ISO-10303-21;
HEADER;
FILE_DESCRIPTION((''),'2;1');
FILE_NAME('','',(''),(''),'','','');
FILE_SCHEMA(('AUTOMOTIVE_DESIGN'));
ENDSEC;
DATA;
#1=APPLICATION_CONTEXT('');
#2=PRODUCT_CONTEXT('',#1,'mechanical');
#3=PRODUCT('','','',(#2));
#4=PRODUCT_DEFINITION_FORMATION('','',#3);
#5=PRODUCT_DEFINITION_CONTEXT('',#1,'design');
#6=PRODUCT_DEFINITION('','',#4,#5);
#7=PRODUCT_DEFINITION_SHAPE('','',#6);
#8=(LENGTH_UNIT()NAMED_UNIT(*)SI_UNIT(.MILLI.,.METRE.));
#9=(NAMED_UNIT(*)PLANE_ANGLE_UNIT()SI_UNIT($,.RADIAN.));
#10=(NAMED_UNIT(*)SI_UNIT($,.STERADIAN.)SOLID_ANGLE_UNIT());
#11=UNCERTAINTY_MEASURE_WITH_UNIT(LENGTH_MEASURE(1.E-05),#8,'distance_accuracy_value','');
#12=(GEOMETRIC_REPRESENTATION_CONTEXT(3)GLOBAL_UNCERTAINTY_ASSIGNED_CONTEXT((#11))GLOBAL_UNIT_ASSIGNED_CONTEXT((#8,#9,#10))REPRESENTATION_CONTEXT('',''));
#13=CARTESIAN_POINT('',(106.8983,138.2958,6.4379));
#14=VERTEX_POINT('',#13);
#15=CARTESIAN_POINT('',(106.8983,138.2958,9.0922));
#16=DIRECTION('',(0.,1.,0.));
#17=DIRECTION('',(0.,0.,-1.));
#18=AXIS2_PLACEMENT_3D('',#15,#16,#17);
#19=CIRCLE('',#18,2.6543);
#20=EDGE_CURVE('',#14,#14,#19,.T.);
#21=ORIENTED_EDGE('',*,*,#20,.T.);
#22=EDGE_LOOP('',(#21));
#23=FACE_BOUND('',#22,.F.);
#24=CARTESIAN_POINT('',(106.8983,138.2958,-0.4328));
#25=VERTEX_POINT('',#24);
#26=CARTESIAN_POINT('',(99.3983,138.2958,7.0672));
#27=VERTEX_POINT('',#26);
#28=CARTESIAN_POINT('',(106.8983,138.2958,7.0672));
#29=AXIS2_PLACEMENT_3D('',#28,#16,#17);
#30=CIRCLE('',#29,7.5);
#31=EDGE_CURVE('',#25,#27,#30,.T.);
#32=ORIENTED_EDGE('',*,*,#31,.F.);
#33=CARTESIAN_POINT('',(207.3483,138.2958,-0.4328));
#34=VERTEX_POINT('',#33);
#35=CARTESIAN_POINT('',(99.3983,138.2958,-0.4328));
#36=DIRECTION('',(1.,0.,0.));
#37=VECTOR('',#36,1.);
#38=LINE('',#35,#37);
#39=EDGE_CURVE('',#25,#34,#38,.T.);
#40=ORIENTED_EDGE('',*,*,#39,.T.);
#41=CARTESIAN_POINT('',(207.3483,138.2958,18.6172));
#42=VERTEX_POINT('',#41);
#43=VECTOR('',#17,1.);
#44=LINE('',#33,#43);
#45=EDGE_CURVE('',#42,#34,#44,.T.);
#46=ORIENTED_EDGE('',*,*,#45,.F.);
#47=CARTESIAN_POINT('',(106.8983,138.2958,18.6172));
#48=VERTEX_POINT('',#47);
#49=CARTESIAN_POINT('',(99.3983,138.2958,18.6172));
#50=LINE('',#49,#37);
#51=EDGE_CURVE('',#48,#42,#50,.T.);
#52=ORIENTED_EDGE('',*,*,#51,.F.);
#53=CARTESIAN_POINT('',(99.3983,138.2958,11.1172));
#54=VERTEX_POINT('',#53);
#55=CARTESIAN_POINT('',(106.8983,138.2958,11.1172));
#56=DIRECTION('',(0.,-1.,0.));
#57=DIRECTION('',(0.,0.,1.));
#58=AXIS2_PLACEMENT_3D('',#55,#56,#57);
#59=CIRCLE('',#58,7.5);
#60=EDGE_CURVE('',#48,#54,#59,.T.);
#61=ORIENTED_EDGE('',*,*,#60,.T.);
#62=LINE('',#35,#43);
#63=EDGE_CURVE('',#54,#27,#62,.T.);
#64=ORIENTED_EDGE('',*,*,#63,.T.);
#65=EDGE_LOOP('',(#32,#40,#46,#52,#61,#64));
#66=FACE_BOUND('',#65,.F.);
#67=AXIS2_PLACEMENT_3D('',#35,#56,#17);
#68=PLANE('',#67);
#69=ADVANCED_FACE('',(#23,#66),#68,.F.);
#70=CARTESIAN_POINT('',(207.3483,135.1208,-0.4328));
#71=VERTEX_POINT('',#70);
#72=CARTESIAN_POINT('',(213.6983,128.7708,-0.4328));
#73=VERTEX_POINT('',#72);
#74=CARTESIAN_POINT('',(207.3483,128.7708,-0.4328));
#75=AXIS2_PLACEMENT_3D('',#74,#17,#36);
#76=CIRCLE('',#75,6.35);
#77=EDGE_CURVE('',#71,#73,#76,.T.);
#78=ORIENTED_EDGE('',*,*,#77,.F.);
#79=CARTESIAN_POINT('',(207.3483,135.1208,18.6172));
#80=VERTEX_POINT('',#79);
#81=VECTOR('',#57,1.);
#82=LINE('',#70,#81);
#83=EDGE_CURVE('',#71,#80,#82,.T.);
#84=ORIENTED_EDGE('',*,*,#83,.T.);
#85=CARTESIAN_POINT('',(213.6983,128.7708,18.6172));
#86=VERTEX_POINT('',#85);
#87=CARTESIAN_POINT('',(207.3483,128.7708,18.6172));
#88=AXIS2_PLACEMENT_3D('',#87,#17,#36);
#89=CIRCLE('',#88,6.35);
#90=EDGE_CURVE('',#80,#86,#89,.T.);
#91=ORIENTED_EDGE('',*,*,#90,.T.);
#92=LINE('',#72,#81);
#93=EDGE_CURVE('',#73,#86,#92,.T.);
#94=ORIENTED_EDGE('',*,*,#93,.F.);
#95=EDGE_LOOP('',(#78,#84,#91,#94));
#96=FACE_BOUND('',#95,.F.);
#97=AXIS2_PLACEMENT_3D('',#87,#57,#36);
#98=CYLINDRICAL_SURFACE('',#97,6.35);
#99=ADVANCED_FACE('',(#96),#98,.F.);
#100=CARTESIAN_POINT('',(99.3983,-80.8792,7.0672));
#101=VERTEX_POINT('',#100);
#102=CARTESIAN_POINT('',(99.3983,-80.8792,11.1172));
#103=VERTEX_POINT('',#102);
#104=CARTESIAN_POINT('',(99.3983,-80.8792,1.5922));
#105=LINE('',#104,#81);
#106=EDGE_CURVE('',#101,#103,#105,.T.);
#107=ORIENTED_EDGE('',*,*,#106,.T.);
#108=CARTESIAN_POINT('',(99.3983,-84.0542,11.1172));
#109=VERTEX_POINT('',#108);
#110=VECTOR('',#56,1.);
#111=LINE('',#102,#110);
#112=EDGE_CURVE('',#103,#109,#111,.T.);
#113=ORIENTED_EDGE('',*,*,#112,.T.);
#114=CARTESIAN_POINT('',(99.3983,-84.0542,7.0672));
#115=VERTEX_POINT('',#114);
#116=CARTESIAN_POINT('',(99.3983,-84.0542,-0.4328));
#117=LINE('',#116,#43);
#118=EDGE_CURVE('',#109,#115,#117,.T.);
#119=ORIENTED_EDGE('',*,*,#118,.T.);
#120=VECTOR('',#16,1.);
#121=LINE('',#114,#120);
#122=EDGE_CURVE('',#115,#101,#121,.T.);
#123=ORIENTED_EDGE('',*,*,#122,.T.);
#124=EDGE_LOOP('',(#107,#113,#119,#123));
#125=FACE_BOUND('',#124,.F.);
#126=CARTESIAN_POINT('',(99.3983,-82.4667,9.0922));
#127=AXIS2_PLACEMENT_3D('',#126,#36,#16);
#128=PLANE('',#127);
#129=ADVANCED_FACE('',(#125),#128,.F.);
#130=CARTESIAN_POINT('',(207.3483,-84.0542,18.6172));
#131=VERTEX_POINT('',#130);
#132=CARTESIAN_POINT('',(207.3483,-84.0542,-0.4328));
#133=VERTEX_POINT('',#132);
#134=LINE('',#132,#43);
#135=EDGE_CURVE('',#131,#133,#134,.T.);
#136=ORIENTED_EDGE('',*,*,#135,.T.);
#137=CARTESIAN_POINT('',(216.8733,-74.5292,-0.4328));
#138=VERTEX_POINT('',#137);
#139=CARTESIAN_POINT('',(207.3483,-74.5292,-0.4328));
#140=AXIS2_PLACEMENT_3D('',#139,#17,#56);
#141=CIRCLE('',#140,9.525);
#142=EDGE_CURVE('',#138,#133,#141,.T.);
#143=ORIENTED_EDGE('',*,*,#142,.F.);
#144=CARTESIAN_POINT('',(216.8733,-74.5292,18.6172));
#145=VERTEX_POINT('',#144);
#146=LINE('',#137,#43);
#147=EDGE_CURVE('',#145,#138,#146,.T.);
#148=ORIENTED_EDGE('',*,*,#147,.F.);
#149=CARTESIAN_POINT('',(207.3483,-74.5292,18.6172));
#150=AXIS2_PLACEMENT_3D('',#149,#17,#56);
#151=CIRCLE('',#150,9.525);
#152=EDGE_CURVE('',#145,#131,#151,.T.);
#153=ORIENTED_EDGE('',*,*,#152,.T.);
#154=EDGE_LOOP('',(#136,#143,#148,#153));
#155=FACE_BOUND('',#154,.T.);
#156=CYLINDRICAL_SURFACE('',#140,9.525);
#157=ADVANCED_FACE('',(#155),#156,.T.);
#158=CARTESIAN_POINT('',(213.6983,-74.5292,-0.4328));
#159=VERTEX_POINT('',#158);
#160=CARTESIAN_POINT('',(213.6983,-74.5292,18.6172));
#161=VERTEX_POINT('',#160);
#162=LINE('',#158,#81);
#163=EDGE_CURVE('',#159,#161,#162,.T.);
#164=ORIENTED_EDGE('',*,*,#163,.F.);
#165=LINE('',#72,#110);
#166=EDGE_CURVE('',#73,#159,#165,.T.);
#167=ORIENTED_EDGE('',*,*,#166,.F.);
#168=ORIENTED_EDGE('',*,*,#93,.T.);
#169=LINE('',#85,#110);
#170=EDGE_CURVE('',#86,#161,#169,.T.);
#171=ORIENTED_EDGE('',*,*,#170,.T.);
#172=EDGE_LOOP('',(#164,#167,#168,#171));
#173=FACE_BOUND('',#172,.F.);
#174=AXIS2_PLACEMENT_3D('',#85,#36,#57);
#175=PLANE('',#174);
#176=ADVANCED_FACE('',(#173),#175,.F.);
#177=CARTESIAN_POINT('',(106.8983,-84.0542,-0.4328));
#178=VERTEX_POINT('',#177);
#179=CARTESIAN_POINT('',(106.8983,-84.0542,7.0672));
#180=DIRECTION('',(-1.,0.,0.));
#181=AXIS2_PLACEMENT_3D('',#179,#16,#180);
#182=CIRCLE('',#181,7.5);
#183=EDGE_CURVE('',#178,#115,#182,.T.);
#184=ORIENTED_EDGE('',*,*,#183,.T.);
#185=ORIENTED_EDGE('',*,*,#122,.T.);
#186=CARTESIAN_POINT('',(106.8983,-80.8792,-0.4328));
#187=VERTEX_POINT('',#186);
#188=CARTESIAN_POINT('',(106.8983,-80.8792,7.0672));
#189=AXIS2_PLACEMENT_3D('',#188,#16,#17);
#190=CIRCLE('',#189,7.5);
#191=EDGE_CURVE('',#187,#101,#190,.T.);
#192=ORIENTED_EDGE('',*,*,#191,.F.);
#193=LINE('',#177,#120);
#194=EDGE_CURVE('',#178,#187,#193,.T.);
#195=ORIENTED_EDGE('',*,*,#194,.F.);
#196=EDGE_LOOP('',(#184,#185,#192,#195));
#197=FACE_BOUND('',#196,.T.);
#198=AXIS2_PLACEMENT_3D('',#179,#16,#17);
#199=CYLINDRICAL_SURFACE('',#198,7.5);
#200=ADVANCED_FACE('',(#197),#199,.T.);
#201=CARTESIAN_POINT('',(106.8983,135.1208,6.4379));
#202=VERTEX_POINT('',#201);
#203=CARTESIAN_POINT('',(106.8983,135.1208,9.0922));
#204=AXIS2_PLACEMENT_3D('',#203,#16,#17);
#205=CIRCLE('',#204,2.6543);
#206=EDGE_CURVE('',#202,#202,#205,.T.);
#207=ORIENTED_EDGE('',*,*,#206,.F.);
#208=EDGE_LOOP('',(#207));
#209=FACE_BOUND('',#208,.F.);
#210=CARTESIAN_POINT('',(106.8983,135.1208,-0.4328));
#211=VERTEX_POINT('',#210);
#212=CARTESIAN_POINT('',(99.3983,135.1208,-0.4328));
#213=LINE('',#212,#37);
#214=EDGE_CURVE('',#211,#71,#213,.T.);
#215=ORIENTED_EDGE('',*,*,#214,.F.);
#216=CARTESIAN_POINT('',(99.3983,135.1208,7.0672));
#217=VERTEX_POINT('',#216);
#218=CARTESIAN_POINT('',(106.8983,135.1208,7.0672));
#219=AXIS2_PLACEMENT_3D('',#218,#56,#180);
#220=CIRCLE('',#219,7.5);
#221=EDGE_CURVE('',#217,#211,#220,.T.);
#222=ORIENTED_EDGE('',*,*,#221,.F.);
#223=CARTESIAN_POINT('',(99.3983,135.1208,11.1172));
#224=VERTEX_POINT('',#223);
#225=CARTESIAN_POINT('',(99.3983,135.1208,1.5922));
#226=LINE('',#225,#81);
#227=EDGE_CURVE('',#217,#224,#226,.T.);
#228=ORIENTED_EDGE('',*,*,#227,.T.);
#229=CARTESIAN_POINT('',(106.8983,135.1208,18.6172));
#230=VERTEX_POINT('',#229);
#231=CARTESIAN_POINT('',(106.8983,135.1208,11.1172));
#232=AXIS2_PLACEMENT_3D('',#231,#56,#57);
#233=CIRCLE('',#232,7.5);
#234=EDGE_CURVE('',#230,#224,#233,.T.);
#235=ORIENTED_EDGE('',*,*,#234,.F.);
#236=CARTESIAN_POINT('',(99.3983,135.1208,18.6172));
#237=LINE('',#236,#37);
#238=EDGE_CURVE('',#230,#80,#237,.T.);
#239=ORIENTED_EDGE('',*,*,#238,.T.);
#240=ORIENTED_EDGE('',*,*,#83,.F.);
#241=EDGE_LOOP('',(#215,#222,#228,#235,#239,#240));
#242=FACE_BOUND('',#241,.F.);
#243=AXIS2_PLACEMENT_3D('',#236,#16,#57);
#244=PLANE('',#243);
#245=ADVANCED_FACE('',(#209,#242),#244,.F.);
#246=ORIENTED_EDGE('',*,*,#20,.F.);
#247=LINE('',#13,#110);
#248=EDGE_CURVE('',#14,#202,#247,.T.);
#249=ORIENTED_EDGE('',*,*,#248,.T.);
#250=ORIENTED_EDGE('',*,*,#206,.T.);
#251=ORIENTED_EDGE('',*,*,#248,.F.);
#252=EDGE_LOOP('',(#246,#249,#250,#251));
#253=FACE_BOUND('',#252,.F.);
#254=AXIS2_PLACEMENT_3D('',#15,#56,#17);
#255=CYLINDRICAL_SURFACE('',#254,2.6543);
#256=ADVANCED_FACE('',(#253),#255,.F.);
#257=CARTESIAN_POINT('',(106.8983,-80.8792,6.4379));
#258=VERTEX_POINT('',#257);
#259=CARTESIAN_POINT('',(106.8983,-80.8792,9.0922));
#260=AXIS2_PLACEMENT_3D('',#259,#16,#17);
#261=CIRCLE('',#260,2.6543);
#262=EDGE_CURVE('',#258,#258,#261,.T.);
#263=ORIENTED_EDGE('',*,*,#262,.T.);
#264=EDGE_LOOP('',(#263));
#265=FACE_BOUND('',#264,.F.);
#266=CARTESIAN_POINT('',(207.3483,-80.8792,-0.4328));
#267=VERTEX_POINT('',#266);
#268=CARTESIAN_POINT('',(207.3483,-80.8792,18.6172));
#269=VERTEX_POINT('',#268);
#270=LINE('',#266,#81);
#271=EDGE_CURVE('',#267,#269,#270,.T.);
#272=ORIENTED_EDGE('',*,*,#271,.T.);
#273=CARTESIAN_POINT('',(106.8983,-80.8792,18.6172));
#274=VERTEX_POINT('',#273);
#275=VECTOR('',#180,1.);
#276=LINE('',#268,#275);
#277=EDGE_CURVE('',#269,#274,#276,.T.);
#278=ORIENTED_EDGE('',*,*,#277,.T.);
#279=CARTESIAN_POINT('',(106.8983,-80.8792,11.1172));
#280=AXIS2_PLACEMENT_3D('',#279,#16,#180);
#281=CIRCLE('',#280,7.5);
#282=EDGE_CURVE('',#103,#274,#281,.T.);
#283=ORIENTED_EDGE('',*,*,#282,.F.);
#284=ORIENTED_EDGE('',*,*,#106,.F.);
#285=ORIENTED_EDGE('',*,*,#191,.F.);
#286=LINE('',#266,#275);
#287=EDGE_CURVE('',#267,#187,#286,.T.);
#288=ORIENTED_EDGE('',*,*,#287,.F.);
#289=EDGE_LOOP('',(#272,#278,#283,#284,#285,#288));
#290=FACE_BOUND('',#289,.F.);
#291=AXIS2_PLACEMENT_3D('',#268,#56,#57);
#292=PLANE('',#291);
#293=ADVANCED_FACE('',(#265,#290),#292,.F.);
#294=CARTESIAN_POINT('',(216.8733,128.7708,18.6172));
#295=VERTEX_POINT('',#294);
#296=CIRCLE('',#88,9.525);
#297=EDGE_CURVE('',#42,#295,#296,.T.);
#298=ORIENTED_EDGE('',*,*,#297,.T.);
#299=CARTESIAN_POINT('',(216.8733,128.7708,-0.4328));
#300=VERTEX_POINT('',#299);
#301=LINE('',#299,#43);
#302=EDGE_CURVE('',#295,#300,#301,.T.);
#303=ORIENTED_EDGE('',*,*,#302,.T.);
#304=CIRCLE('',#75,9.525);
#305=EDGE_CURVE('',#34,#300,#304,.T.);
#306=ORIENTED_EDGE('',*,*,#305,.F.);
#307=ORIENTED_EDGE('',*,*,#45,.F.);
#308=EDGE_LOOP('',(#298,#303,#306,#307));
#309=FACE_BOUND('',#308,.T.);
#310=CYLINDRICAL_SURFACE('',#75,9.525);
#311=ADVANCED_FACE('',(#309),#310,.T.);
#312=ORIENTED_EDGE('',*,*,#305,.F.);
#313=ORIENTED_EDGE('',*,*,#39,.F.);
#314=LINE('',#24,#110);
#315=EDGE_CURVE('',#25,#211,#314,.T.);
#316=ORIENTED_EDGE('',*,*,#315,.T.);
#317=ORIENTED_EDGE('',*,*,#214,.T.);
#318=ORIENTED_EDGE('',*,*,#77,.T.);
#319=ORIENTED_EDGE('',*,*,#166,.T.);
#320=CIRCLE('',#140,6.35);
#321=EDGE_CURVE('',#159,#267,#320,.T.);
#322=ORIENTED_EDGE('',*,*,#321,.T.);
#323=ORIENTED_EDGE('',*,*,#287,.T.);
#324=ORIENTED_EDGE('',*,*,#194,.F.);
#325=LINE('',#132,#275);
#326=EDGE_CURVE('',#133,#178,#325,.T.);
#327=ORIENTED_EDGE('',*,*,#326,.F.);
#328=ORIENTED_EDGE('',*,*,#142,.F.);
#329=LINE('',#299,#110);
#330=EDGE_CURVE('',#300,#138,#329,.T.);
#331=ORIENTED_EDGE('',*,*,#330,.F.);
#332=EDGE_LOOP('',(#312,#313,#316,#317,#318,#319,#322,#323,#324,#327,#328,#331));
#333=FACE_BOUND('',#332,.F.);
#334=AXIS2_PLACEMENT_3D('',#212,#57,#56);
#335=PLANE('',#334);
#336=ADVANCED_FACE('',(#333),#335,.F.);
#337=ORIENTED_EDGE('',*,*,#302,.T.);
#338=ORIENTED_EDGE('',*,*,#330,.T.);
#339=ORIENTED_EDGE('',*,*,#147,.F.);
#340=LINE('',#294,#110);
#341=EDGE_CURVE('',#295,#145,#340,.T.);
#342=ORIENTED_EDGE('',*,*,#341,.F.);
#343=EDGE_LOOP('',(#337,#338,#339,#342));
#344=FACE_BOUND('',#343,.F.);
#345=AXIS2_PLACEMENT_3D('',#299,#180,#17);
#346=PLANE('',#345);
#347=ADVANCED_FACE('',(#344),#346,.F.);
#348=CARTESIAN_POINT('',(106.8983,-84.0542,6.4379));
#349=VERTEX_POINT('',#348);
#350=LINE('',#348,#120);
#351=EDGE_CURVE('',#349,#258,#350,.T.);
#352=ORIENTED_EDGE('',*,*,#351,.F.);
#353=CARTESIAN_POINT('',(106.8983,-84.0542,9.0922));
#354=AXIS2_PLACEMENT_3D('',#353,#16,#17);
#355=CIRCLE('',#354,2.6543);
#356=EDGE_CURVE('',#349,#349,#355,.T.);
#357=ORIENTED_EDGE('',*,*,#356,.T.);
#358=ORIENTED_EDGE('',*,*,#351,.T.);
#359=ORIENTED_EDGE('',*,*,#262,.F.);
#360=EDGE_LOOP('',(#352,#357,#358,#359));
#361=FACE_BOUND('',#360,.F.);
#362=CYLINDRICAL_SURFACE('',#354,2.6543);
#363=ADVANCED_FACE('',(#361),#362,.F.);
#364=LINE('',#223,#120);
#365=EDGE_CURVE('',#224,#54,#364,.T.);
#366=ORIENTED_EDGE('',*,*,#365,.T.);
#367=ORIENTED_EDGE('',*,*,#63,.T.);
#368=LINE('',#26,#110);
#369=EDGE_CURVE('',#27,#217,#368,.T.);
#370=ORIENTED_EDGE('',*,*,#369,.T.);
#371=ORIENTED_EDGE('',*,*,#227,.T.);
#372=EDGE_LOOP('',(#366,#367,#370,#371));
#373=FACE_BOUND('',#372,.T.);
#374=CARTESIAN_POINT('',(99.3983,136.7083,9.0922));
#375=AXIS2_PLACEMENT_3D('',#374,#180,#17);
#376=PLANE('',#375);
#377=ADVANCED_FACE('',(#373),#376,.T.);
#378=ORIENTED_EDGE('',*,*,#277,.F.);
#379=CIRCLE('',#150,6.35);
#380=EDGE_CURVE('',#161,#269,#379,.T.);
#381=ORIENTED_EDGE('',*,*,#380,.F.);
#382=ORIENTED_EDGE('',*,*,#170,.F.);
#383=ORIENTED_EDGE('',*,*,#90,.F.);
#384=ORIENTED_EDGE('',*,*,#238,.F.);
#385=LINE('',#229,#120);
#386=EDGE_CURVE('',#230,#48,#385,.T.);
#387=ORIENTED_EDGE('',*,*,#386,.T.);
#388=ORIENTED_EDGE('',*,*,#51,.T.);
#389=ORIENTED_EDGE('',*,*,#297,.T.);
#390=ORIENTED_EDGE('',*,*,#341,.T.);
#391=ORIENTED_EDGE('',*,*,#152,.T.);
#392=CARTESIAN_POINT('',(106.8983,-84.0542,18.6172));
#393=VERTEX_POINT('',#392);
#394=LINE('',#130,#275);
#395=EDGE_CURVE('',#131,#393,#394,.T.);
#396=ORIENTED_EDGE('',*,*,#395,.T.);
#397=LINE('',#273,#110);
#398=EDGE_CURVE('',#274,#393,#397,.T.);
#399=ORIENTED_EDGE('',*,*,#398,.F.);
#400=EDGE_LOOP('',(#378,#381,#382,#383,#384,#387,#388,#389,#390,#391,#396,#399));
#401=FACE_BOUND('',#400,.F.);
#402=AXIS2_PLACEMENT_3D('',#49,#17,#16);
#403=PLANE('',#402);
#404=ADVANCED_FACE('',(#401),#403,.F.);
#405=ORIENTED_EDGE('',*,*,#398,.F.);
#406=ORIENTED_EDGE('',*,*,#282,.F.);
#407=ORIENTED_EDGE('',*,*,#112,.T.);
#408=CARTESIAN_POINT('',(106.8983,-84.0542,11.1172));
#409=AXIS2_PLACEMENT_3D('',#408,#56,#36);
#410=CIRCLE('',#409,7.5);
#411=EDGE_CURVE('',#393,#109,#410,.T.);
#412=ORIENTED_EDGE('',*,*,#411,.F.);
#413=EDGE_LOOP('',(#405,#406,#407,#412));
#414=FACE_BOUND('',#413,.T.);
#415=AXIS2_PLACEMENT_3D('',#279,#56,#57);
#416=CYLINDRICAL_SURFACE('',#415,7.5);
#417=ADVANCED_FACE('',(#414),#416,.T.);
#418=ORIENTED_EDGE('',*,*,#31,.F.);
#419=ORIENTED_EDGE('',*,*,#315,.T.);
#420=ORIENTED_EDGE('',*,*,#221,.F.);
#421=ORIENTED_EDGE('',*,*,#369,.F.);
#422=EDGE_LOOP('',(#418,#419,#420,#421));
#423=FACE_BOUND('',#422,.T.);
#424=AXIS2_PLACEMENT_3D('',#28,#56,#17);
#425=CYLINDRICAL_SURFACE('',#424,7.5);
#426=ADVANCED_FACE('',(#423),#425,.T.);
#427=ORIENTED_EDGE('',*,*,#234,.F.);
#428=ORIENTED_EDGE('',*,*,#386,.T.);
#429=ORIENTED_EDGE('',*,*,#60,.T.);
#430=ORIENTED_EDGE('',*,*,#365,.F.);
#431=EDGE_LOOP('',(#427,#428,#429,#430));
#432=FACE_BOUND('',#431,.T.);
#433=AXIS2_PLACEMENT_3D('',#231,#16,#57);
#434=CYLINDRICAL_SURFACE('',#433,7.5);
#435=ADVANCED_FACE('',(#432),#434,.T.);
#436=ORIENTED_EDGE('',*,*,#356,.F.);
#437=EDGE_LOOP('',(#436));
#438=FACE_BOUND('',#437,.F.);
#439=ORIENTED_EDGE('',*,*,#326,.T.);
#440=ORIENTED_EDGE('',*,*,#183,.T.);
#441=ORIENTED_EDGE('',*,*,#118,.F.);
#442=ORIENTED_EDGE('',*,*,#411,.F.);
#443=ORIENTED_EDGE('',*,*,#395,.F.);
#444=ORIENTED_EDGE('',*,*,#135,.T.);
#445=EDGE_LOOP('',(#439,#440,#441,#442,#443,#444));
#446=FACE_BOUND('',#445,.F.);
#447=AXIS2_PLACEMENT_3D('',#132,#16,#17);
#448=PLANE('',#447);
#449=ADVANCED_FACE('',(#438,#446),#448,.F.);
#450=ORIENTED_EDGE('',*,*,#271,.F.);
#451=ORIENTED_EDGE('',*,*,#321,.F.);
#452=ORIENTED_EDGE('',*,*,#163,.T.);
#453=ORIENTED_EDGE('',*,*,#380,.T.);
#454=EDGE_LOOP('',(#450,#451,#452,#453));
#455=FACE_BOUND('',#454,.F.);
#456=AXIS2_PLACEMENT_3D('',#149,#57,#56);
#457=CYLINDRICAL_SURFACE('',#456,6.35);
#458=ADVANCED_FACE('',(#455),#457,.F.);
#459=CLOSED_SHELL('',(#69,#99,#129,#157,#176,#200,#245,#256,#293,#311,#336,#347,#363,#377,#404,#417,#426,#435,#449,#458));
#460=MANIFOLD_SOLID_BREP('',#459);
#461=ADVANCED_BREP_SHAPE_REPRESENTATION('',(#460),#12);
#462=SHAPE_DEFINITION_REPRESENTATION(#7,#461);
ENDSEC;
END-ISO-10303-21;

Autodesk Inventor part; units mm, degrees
ref_plane "YZ Plane" through (0, 0, 0) normal (1, 0, 0) x (0, 1, 0)
ref_plane "XZ Plane" through (0, 0, 0) normal (0, 1, 0) x (-1, 0, 0)
ref_plane "XY Plane" through (0, 0, 0) normal (0, 0, 1) x (1, 0, 0)
ref_plane "Work Plane1" through (122.7733, 133.3708, 9.0922) normal (0, 0, 1) x (1, 0, 0)
sketch "Sketch1" plane through (122.7733, 133.3708, 9.0922) normal (0, 0, 1) x (1, 0, 0)
  line L0 (-23.375, 1.75) -> (-8.375, 1.75) construction
  line L1 (-8.375, -214.25) -> (-23.375, -214.25) construction
  line L2 (-23.375, 1.75) -> (84.575, 1.75)
  line L3 (90.925, -4.6) -> (90.925, -207.9)
  line L4 (84.575, -214.25) -> (-23.375, -214.25)
  arc A0 (90.925, -4.6) -> (84.575, 1.75) centre (84.575, -4.6) ccw
  arc A1 (84.575, -214.25) -> (90.925, -207.9) centre (84.575, -207.9) ccw
  point P0 (-122.7733, -133.3708)
  point P1 (90.925, 1.75)
  point P2 (90.925, -214.25)
  dimension "d0" = 114.3
  dimension "d3" = 6.35
ref_plane "Work Plane3" through (99.3983, 135.1208, 9.0922) normal (-1, 0, 0) x (0, 1, 0)
ref_plane "Work Plane2" through (44.8233, 115.6208, -3.6078) normal (-1, 0, 0) x (0, 1, 0)
sketch "Sketch3" plane through (99.3983, 135.1208, 9.0922) normal (-1, 0, 0) x (0, 1, 0)
  line L0 (3.175, -9.525) -> (0, -9.525)
  line L1 (0, -9.525) -> (0, 9.525)
  line L2 (0, 9.525) -> (3.175, 9.525)
  line L3 (3.175, 9.525) -> (3.175, -9.525)
  line L4 (0, 7.5) -> (0, -7.5) projected
  line L5 (-1.2141, 0) -> (3.175, 0) construction
  point P0 (-135.1208, 9.0922)
  point P1 (0, 0)
  dimension "d4" = 3.175
  dimension "d15" = 19.05
sweep "Sweep1" add profiles "Sketch3" path "Sketch1"
fillet "Fillet1" radius 7.5 4 edges at (99.3983, 136.7083, -0.4328) (99.3983, -82.4667, -0.4328) (99.3983, 136.7083, 18.6172) (99.3983, -82.4667, 18.6172)
sketch "Sketch4" plane through (207.3483, -84.0542, -0.4328) normal (0, -1, 0) x (1, 0, 0)
  circle A0 centre (-100.45, 9.525) radius 2.7559 projected
  point P0 (-207.3483, 0.4328)
hole "Hole1" at (106.8983, -84.0542, 9.0922) direction (0, 1, 0) diameter 5.3086 depth 3.175
ref_plane "Work Plane4" through (207.3483, 27.1208, 18.6172) normal (0, 1, 0) x (1, 0, 0)
mirror "Mirror1" about plane through (207.3483, 27.1208, 18.6172) normal (0, 1, 0) of "Hole1"
properties part number "Pivoting Bracket"
